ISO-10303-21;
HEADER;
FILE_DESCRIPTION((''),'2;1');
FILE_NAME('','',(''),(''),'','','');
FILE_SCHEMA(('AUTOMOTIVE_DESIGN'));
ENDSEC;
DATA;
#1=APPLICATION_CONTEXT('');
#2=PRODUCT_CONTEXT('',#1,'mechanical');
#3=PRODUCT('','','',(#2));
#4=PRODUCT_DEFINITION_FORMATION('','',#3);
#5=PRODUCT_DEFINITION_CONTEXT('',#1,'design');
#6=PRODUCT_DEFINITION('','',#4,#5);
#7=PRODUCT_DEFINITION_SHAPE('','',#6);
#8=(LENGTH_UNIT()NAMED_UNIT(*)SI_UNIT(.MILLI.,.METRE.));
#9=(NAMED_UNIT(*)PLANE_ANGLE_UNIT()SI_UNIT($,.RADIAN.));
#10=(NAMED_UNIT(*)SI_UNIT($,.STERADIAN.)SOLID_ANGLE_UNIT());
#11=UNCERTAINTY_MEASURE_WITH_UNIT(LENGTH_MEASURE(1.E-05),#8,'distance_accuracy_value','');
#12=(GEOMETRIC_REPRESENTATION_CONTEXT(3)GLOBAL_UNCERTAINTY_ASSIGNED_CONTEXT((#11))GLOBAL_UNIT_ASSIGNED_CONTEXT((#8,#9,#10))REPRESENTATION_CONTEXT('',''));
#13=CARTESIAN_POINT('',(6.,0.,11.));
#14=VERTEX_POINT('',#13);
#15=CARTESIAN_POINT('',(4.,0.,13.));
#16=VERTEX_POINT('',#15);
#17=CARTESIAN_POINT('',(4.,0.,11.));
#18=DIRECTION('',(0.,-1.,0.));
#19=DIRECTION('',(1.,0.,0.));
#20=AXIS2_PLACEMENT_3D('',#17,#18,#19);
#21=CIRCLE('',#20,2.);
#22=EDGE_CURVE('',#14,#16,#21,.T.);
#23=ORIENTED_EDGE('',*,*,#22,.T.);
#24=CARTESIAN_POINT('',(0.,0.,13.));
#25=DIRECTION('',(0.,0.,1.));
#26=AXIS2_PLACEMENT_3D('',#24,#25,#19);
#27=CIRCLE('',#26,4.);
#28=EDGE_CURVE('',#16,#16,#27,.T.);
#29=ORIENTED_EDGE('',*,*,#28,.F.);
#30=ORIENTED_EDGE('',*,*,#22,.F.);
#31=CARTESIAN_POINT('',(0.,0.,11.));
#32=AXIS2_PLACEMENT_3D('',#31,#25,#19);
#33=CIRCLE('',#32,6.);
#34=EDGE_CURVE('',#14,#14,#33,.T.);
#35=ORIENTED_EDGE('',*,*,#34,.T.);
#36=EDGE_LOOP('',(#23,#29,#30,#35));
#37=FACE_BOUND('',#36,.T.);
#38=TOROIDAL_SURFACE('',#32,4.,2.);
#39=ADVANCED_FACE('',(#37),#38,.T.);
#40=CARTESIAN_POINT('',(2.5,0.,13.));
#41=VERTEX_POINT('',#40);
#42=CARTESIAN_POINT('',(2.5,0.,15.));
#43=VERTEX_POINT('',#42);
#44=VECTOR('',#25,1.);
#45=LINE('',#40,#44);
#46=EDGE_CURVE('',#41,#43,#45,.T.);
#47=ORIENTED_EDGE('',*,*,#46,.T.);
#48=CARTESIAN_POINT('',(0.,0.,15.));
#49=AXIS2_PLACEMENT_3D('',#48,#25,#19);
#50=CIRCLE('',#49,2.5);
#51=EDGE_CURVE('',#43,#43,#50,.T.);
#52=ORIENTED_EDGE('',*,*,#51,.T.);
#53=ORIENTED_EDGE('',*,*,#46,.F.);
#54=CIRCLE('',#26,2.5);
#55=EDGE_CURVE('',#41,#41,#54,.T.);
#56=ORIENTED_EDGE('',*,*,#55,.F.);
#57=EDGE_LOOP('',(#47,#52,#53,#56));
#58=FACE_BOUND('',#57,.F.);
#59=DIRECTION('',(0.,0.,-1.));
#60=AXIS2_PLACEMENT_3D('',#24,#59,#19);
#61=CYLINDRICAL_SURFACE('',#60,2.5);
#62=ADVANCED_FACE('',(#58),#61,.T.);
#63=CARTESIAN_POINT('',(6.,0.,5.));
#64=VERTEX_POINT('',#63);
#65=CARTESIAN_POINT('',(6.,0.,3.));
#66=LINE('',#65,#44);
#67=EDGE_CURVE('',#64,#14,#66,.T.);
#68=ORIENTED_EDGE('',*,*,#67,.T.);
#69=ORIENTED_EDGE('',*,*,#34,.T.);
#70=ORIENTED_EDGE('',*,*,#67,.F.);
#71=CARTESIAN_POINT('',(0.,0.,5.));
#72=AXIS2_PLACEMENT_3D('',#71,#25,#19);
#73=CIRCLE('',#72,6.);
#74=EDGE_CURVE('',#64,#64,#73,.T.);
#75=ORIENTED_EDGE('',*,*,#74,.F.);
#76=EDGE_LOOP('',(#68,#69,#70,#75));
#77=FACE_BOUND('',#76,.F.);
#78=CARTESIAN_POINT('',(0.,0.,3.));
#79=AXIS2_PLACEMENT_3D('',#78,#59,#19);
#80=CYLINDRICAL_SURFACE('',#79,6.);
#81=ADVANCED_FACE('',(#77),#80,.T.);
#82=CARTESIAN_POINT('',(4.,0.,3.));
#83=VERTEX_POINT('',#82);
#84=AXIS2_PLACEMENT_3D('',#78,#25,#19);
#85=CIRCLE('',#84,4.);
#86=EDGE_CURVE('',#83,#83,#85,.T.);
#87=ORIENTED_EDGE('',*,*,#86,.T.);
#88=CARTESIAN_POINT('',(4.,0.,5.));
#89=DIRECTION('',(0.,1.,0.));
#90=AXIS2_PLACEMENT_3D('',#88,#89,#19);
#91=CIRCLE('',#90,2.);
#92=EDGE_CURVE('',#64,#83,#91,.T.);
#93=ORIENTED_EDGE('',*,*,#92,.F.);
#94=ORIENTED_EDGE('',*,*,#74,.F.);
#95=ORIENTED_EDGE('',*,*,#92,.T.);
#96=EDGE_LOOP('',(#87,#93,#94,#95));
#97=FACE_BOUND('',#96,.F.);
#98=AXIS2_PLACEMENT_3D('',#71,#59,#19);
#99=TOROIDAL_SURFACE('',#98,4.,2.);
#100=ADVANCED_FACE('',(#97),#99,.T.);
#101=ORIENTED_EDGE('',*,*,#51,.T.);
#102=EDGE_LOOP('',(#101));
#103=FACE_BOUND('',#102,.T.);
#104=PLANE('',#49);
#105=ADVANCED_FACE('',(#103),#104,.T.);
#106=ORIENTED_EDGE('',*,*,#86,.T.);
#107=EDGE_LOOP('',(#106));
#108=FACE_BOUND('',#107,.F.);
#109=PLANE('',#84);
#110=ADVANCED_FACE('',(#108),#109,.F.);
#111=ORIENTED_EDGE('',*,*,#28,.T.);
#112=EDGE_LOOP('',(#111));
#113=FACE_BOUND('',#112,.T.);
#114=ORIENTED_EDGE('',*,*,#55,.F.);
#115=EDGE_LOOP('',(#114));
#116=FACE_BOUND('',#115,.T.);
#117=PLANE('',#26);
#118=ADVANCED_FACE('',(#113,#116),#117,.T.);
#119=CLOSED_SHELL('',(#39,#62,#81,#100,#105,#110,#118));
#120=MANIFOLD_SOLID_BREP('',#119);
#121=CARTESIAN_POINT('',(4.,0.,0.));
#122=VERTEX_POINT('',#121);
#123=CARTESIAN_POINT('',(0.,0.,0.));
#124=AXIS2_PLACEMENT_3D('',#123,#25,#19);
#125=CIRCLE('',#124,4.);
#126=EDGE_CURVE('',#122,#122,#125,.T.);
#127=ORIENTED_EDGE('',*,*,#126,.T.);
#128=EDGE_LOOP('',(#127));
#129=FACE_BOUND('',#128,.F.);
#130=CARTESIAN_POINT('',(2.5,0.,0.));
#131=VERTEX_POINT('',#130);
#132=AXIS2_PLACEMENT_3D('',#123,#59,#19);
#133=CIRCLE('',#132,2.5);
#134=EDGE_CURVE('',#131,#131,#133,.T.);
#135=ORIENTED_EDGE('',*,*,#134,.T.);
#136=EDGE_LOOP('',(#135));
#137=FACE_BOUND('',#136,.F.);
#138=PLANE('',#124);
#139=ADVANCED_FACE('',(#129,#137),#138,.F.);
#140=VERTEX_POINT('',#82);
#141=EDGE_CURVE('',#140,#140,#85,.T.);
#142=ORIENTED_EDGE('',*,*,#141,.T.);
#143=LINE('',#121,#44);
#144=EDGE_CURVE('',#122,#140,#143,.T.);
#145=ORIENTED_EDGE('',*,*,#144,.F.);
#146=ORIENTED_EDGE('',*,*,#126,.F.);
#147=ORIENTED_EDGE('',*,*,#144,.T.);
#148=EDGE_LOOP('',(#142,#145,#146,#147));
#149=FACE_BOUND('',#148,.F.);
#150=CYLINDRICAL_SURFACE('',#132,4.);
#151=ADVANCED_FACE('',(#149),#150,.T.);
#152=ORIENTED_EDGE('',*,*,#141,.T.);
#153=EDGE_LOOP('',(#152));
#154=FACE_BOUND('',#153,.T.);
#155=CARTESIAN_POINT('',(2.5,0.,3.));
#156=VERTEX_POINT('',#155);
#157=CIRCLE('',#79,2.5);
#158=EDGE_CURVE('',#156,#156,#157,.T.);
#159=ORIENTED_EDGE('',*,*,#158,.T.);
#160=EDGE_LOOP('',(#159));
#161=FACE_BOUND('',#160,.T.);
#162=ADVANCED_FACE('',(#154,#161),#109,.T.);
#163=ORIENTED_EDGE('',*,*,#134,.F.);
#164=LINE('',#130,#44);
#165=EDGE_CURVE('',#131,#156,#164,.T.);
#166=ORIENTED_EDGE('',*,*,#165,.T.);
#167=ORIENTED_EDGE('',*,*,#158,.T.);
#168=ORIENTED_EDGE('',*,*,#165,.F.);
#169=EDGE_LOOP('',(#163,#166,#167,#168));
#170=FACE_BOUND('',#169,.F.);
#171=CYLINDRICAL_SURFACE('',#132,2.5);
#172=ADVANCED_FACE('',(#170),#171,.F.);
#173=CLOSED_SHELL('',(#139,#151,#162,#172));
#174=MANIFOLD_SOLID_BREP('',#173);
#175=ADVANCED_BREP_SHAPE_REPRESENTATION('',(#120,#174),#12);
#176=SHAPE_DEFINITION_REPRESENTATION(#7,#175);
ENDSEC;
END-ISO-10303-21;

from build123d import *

# Parameters (mm, degrees)
F0_R     = 4
F1_DEPTH = 3
F2_R     = 6
F3_DEPTH = 10
F4_R     = 2.5
F5_DEPTH = 2
F6_R     = 2
F7_R     = 2.5
F8_DEPTH = 8


with BuildPart() as f1:
    # F0 (on Top) → F1 (new body)
    with BuildSketch(Plane.XY):
        Circle(F0_R)
    extrude(amount=F1_DEPTH)

    # F7 (on face) → F8 (cut)
    with BuildSketch(Plane(origin=(0, 0, 0), x_dir=(1, 0, 0), z_dir=(0, 0, -1))):
        Circle(F7_R)
    extrude(amount=-F8_DEPTH, mode=Mode.SUBTRACT)


with BuildPart() as f3:
    # F2 (on face) → F3 (new body)
    with BuildSketch(Plane.XY.offset(3)):
        Circle(F2_R)
    extrude(amount=F3_DEPTH)

    # F4 (on face) → F5 (join)
    with BuildSketch(Plane.XY.offset(13)):
        Circle(F4_R)
    extrude(amount=F5_DEPTH)

    # F6
    f6_edges = [f3.edges().sort_by_distance(p)[0] for p in [
        (-6, 0, 13),
        (-6, 0, 3),
    ]]
    fillet(f6_edges, radius=F6_R)


solid = Compound([f1.part, f3.part])
